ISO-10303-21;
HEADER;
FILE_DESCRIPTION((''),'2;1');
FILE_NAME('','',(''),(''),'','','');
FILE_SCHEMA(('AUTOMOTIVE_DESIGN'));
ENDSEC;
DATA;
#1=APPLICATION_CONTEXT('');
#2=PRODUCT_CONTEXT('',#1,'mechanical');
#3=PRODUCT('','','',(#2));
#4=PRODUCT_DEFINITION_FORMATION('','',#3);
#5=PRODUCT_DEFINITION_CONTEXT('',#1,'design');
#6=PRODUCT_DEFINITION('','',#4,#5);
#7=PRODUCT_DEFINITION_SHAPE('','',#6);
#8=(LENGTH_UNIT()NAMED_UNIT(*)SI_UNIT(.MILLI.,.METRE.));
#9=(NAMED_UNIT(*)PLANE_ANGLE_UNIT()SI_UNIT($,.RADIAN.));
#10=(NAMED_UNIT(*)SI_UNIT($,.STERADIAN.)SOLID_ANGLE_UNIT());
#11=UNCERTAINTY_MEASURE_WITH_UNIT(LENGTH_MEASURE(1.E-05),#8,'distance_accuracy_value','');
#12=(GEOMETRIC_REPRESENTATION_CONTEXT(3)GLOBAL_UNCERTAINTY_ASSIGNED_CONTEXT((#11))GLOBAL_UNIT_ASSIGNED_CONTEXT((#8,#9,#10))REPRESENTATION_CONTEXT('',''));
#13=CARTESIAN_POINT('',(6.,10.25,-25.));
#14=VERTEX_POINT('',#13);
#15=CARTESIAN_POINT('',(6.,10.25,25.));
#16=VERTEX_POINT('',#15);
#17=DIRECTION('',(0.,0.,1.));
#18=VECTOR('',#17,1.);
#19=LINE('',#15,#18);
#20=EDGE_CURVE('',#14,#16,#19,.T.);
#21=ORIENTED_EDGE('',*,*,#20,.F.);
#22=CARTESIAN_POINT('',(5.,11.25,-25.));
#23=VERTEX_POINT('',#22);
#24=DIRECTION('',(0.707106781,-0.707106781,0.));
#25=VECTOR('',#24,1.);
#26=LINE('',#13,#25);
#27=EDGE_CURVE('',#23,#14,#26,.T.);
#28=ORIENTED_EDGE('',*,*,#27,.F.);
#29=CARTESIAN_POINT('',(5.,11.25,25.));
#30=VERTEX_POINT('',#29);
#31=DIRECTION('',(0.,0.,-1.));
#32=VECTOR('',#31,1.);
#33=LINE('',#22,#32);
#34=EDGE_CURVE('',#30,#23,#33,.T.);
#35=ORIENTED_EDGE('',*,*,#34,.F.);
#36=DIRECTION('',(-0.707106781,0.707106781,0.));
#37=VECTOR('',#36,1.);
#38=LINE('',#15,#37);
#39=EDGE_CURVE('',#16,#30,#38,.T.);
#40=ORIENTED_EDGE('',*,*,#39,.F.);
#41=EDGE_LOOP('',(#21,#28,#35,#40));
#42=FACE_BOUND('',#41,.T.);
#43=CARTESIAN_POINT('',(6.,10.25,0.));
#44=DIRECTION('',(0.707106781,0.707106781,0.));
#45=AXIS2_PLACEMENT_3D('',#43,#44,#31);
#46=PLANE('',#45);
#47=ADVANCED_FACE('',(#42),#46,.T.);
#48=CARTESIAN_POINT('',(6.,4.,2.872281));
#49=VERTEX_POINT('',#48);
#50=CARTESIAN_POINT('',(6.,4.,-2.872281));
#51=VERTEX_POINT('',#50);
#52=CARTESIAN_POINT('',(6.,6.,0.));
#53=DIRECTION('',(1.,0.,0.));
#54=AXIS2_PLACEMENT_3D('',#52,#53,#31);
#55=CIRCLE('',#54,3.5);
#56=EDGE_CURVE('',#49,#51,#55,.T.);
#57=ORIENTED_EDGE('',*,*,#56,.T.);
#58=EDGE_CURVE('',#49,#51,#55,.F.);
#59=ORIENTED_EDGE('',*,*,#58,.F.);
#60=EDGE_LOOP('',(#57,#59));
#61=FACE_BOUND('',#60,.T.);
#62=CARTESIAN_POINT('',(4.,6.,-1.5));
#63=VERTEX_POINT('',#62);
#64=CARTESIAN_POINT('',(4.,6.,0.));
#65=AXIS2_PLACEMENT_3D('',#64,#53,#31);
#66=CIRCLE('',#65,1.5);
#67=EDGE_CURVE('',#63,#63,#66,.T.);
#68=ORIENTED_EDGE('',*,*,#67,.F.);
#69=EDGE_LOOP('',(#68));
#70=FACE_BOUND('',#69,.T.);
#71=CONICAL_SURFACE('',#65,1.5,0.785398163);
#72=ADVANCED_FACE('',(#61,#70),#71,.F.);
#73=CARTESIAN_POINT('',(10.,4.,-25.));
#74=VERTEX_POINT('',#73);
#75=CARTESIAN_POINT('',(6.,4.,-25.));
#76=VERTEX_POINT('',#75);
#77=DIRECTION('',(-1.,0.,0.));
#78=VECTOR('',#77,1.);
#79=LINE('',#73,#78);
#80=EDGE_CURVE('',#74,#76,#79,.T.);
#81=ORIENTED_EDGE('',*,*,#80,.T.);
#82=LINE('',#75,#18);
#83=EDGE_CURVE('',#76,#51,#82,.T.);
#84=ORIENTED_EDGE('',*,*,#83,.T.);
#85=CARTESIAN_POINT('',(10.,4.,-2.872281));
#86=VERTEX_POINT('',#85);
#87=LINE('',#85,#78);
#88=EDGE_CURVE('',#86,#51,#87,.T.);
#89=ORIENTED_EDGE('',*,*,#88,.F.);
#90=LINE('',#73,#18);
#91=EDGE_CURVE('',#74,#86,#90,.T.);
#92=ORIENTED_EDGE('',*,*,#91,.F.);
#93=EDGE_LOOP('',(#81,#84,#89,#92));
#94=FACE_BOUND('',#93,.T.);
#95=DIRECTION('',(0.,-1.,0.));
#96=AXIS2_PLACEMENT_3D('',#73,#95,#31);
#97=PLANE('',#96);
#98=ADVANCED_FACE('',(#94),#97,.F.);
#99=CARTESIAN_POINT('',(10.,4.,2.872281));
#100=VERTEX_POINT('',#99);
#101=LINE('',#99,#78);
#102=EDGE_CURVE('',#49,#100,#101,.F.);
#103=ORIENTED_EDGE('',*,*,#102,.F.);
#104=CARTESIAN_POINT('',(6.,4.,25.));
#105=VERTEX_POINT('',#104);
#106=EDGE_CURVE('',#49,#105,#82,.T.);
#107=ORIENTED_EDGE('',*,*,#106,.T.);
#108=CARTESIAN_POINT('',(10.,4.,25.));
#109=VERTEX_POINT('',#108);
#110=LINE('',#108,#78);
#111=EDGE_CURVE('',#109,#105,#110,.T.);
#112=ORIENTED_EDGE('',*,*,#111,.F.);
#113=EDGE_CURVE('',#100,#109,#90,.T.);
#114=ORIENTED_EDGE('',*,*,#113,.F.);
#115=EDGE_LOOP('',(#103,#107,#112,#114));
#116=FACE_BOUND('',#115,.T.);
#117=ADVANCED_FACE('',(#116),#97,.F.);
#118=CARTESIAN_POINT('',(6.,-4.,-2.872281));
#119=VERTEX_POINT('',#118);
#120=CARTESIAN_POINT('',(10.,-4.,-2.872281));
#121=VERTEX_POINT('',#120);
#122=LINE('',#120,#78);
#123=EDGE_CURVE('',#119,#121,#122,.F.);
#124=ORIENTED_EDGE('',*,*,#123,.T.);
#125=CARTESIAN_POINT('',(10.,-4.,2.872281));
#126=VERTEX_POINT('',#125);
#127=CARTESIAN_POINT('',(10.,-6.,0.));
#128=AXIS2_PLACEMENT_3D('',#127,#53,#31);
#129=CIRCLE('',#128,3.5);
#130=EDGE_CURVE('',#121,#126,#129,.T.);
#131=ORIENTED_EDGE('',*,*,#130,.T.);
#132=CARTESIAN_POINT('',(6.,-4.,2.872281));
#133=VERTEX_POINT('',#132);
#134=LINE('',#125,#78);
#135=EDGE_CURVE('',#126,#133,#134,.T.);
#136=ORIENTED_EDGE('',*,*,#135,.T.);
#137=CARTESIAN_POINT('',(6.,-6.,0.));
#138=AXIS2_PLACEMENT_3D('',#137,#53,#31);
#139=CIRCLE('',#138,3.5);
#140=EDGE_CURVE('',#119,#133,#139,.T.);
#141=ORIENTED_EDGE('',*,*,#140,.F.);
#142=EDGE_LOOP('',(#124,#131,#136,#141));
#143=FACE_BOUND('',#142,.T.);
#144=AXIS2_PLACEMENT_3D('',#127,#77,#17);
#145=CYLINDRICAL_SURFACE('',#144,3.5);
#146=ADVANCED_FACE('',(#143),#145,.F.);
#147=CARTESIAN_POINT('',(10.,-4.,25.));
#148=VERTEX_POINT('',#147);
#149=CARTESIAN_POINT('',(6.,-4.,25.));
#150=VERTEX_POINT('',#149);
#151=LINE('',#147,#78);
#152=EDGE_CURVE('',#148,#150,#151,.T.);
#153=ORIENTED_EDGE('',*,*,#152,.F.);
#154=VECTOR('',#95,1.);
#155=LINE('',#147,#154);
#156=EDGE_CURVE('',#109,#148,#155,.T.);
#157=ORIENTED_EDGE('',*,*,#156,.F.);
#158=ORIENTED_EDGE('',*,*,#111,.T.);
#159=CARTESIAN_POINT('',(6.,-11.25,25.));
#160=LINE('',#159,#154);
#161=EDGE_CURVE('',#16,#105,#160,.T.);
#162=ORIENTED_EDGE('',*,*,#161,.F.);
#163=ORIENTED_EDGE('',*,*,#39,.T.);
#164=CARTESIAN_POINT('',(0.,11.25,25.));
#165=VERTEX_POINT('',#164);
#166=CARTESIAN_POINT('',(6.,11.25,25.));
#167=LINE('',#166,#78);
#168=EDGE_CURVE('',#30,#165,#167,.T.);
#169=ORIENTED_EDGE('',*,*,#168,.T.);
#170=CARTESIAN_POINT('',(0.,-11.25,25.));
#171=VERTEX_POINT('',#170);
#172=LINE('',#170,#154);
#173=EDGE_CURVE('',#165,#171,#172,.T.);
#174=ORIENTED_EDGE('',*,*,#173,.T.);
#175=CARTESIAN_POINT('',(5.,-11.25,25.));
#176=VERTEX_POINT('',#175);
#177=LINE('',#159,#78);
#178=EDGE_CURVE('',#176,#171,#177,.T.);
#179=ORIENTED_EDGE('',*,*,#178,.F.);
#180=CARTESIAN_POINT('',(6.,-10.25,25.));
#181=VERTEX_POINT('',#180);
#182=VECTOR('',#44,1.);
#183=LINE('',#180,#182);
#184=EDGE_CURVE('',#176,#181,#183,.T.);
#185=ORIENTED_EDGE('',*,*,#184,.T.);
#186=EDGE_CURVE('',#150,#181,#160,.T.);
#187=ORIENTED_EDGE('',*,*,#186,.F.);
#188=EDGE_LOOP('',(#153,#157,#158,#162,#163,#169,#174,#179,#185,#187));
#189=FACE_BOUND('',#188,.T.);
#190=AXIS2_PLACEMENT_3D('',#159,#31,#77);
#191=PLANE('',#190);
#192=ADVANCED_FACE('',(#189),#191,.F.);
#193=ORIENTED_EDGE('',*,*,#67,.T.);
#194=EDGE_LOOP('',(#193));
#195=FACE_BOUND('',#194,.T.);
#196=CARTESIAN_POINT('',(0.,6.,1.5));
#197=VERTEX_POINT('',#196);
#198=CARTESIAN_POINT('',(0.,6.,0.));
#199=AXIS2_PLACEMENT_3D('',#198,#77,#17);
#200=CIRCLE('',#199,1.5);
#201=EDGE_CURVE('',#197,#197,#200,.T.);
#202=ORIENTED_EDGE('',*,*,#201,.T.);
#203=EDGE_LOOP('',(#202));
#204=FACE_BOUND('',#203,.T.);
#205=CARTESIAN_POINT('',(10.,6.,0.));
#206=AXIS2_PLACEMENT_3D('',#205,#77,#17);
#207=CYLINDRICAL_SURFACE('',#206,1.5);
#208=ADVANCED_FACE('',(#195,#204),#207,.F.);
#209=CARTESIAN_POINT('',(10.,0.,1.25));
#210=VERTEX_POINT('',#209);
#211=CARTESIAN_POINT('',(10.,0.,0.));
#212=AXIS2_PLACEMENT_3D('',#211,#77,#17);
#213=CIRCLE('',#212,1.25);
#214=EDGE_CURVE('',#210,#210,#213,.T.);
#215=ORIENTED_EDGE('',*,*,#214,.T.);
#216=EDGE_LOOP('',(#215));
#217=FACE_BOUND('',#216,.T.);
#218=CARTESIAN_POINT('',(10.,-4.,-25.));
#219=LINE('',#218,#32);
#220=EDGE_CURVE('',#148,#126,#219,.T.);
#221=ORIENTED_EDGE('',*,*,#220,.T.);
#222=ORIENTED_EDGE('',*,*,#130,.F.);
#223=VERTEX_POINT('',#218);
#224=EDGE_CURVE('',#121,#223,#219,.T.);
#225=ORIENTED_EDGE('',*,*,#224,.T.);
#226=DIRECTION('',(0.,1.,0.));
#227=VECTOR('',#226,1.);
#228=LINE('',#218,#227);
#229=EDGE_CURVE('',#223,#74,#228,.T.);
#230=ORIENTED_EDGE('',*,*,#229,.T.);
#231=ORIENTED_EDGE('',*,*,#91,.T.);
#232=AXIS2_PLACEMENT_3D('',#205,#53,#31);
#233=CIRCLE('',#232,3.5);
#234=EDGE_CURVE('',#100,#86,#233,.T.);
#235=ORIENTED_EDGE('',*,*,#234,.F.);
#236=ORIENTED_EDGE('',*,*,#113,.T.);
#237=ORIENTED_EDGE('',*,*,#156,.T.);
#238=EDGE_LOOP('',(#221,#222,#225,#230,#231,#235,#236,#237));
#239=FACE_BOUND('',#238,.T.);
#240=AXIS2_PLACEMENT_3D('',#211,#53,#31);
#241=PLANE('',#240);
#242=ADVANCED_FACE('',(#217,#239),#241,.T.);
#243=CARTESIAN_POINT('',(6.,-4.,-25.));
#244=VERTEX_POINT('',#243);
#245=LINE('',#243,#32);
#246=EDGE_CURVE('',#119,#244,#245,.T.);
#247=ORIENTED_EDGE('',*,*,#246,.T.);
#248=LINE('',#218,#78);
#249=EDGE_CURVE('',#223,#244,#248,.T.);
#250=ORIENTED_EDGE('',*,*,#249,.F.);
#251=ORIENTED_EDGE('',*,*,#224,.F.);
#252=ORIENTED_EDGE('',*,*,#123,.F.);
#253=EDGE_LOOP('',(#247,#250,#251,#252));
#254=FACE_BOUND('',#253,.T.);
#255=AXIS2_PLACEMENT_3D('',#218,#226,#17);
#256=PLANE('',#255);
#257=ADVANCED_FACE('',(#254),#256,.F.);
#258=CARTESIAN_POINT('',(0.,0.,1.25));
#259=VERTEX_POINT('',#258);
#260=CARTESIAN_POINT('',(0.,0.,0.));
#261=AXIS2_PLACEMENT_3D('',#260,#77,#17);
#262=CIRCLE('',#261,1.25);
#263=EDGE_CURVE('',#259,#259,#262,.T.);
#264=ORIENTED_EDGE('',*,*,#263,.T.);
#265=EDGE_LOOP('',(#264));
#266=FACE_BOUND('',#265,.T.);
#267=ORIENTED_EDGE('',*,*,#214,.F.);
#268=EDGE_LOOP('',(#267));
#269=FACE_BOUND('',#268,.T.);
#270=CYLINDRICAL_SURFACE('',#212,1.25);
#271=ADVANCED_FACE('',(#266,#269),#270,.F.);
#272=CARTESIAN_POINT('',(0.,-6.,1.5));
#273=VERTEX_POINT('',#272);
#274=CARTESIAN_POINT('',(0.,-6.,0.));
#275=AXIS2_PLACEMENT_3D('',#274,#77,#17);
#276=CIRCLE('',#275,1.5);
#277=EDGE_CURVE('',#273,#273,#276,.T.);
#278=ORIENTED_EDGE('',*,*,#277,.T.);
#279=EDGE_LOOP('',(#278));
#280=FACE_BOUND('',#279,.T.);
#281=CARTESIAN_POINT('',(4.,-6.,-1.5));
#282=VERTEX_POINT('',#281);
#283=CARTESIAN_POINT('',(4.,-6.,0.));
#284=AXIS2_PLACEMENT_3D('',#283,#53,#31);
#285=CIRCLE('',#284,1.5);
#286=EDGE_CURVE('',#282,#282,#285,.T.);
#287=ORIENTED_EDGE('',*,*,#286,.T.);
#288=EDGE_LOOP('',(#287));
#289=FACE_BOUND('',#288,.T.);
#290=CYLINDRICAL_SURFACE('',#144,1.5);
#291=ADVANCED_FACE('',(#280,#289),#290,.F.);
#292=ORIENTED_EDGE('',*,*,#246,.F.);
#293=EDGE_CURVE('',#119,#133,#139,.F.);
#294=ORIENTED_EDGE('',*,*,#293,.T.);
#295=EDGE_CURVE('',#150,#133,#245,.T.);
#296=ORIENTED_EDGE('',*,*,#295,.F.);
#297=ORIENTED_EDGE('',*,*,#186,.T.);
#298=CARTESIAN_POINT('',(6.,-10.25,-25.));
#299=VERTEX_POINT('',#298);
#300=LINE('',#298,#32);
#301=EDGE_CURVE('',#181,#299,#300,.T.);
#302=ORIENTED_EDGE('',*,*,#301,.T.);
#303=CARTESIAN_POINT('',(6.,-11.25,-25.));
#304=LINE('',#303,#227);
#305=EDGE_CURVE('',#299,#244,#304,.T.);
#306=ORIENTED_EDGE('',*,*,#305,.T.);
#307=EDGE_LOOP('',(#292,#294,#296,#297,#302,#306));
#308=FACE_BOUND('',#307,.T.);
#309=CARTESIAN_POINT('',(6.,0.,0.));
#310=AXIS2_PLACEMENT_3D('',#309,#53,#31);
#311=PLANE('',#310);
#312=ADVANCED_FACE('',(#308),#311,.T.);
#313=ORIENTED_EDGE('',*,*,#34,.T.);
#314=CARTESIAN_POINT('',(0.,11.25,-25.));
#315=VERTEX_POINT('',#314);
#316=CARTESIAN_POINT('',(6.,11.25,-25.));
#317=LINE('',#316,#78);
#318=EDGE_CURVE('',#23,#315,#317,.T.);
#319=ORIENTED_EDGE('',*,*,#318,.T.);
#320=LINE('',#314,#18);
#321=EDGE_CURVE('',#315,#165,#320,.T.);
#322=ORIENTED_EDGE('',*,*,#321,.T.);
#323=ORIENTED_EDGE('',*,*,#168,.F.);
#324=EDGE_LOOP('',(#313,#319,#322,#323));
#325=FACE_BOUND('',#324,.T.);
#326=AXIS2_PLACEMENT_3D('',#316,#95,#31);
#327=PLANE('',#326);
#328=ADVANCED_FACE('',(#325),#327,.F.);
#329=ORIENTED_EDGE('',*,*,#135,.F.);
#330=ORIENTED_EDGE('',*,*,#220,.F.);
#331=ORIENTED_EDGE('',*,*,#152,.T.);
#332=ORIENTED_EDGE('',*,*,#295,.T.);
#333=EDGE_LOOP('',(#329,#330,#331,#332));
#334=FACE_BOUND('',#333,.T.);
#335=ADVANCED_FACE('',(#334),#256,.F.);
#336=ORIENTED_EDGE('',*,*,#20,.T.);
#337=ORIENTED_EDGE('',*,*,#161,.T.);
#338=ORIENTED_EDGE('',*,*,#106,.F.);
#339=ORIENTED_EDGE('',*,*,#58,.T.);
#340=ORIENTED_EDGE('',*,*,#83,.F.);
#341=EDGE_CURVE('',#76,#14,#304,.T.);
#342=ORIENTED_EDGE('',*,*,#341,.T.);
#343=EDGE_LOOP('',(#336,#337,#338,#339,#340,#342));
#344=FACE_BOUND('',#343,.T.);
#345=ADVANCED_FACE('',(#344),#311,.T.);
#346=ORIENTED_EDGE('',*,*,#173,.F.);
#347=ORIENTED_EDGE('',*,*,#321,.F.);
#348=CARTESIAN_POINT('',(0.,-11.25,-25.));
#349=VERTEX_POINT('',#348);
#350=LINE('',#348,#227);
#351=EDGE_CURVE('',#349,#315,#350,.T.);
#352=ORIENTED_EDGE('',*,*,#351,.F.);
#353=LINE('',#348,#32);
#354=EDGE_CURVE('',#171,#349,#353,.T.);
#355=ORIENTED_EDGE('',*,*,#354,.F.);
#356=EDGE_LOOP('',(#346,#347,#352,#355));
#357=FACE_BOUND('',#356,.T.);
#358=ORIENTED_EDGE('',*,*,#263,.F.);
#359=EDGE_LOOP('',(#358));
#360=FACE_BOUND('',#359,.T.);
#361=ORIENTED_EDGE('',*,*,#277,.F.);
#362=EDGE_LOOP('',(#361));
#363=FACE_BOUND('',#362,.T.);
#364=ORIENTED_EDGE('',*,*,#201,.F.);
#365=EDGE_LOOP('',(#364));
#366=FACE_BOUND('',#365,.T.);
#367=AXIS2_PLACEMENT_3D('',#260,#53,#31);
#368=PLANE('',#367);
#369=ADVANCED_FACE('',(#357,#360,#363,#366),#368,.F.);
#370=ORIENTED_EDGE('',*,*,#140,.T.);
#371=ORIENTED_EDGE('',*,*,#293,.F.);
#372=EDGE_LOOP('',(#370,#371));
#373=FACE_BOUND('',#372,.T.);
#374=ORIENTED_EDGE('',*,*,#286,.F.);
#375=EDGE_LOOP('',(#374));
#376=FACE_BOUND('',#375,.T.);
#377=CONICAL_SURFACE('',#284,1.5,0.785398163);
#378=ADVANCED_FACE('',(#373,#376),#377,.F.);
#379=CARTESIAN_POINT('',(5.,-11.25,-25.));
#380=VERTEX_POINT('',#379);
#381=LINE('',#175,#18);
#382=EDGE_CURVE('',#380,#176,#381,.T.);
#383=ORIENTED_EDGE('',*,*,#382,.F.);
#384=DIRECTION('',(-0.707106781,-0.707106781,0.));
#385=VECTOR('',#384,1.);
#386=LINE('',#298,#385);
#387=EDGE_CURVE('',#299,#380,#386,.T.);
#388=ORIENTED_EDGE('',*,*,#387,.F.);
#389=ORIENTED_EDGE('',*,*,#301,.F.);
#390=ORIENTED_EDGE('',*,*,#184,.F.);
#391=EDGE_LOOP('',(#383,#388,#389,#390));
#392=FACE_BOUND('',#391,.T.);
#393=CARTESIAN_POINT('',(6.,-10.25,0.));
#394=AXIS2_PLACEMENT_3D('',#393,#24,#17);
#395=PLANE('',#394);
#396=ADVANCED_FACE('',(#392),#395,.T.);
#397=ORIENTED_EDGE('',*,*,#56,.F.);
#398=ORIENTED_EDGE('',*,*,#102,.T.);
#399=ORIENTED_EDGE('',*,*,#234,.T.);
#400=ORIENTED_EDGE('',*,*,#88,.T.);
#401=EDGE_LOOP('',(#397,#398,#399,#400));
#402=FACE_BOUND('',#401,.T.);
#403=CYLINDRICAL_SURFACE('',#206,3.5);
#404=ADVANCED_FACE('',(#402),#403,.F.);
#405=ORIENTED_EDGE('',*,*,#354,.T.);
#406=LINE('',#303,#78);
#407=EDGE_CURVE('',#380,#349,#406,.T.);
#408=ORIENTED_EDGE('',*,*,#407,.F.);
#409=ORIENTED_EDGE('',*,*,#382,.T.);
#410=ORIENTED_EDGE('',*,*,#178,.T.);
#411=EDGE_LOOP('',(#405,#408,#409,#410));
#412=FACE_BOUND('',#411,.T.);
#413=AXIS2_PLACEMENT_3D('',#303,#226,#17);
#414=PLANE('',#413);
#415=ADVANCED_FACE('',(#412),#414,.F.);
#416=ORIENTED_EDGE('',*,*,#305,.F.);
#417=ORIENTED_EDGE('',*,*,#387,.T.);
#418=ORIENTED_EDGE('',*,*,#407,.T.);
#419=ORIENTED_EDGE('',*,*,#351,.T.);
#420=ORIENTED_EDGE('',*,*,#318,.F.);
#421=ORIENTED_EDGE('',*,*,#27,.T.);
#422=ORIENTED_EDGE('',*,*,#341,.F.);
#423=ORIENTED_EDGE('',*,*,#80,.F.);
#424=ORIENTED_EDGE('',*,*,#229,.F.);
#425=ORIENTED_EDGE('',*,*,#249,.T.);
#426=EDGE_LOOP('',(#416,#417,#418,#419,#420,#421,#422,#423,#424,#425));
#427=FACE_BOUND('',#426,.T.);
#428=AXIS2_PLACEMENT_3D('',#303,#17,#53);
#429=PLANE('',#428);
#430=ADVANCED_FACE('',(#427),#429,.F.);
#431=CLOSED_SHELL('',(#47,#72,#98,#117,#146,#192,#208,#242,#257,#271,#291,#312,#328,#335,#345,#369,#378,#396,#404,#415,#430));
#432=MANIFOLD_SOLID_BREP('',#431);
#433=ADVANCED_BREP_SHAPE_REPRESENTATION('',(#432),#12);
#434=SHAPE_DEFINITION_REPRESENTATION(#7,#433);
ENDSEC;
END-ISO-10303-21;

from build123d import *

# Parameters (mm, degrees)
SKETCH_1_W          = 50
SKETCH_1_H          = 22.5
EXTRUDE_1_DEPTH     = 6
SKETCH_2_W          = 50
SKETCH_2_H          = 8
EXTRUDE_2_DEPTH     = 4
SKETCH_3_R          = 1.5
SKETCH_3_R_2        = 1.25
CUT_EXTRUDE_1_DEPTH = 30.181543825
SKETCH_4_R          = 3.5
CUT_EXTRUDE_2_DEPTH = 29.063543967
CHAMFER_1_SIZE      = 2
CHAMFER_2_SIZE      = 1


with BuildPart() as part:
    # 草图1 → 凸台-拉伸1 (new body)
    with BuildSketch(Plane(origin=(0, 0, 0), x_dir=(0, 0, -1), z_dir=(1, 0, 0))):
        Rectangle(SKETCH_1_W, SKETCH_1_H)
    extrude(amount=EXTRUDE_1_DEPTH)

    # 草图2 → 凸台-拉伸2 (add)
    with BuildSketch(Plane(origin=(6, 0, 0), x_dir=(0, 0, -1), z_dir=(1, 0, 0))):
        Rectangle(SKETCH_2_W, SKETCH_2_H)
    extrude(amount=EXTRUDE_2_DEPTH)

    # 草图3 → 切除-拉伸1 (cut, through all)
    with BuildSketch(Plane.ZY):
        with Locations((0, 6)):
            Circle(SKETCH_3_R)
        with Locations((0, -6)):
            Circle(SKETCH_3_R)
        Circle(SKETCH_3_R_2)
    extrude(amount=-CUT_EXTRUDE_1_DEPTH, mode=Mode.SUBTRACT)

    # 草图4 → 切除-拉伸2 (cut, through all)
    with BuildSketch(Plane(origin=(6, 0, 0), x_dir=(0, 0, -1), z_dir=(1, 0, 0))):
        with Locations((0, 6)):
            Circle(SKETCH_4_R)
        with Locations((0, -6)):
            Circle(SKETCH_4_R)
    extrude(amount=CUT_EXTRUDE_2_DEPTH, mode=Mode.SUBTRACT)

    # 倒角1
    chamfer_1_edges = [part.edges().sort_by_distance(p)[0] for p in [
        (6, 6, -1.5),
        (6, -6, -1.5),
    ]]
    chamfer(chamfer_1_edges, length=CHAMFER_1_SIZE - 0.0001)  # a hair under: the kernel refuses the full size

    # 倒角2
    chamfer_2_edges = [part.edges().sort_by_distance(p)[0] for p in [
        (6, 11.25, 0),
        (6, -11.25, 0),
    ]]
    chamfer(chamfer_2_edges, length=CHAMFER_2_SIZE)


solid = part.part
